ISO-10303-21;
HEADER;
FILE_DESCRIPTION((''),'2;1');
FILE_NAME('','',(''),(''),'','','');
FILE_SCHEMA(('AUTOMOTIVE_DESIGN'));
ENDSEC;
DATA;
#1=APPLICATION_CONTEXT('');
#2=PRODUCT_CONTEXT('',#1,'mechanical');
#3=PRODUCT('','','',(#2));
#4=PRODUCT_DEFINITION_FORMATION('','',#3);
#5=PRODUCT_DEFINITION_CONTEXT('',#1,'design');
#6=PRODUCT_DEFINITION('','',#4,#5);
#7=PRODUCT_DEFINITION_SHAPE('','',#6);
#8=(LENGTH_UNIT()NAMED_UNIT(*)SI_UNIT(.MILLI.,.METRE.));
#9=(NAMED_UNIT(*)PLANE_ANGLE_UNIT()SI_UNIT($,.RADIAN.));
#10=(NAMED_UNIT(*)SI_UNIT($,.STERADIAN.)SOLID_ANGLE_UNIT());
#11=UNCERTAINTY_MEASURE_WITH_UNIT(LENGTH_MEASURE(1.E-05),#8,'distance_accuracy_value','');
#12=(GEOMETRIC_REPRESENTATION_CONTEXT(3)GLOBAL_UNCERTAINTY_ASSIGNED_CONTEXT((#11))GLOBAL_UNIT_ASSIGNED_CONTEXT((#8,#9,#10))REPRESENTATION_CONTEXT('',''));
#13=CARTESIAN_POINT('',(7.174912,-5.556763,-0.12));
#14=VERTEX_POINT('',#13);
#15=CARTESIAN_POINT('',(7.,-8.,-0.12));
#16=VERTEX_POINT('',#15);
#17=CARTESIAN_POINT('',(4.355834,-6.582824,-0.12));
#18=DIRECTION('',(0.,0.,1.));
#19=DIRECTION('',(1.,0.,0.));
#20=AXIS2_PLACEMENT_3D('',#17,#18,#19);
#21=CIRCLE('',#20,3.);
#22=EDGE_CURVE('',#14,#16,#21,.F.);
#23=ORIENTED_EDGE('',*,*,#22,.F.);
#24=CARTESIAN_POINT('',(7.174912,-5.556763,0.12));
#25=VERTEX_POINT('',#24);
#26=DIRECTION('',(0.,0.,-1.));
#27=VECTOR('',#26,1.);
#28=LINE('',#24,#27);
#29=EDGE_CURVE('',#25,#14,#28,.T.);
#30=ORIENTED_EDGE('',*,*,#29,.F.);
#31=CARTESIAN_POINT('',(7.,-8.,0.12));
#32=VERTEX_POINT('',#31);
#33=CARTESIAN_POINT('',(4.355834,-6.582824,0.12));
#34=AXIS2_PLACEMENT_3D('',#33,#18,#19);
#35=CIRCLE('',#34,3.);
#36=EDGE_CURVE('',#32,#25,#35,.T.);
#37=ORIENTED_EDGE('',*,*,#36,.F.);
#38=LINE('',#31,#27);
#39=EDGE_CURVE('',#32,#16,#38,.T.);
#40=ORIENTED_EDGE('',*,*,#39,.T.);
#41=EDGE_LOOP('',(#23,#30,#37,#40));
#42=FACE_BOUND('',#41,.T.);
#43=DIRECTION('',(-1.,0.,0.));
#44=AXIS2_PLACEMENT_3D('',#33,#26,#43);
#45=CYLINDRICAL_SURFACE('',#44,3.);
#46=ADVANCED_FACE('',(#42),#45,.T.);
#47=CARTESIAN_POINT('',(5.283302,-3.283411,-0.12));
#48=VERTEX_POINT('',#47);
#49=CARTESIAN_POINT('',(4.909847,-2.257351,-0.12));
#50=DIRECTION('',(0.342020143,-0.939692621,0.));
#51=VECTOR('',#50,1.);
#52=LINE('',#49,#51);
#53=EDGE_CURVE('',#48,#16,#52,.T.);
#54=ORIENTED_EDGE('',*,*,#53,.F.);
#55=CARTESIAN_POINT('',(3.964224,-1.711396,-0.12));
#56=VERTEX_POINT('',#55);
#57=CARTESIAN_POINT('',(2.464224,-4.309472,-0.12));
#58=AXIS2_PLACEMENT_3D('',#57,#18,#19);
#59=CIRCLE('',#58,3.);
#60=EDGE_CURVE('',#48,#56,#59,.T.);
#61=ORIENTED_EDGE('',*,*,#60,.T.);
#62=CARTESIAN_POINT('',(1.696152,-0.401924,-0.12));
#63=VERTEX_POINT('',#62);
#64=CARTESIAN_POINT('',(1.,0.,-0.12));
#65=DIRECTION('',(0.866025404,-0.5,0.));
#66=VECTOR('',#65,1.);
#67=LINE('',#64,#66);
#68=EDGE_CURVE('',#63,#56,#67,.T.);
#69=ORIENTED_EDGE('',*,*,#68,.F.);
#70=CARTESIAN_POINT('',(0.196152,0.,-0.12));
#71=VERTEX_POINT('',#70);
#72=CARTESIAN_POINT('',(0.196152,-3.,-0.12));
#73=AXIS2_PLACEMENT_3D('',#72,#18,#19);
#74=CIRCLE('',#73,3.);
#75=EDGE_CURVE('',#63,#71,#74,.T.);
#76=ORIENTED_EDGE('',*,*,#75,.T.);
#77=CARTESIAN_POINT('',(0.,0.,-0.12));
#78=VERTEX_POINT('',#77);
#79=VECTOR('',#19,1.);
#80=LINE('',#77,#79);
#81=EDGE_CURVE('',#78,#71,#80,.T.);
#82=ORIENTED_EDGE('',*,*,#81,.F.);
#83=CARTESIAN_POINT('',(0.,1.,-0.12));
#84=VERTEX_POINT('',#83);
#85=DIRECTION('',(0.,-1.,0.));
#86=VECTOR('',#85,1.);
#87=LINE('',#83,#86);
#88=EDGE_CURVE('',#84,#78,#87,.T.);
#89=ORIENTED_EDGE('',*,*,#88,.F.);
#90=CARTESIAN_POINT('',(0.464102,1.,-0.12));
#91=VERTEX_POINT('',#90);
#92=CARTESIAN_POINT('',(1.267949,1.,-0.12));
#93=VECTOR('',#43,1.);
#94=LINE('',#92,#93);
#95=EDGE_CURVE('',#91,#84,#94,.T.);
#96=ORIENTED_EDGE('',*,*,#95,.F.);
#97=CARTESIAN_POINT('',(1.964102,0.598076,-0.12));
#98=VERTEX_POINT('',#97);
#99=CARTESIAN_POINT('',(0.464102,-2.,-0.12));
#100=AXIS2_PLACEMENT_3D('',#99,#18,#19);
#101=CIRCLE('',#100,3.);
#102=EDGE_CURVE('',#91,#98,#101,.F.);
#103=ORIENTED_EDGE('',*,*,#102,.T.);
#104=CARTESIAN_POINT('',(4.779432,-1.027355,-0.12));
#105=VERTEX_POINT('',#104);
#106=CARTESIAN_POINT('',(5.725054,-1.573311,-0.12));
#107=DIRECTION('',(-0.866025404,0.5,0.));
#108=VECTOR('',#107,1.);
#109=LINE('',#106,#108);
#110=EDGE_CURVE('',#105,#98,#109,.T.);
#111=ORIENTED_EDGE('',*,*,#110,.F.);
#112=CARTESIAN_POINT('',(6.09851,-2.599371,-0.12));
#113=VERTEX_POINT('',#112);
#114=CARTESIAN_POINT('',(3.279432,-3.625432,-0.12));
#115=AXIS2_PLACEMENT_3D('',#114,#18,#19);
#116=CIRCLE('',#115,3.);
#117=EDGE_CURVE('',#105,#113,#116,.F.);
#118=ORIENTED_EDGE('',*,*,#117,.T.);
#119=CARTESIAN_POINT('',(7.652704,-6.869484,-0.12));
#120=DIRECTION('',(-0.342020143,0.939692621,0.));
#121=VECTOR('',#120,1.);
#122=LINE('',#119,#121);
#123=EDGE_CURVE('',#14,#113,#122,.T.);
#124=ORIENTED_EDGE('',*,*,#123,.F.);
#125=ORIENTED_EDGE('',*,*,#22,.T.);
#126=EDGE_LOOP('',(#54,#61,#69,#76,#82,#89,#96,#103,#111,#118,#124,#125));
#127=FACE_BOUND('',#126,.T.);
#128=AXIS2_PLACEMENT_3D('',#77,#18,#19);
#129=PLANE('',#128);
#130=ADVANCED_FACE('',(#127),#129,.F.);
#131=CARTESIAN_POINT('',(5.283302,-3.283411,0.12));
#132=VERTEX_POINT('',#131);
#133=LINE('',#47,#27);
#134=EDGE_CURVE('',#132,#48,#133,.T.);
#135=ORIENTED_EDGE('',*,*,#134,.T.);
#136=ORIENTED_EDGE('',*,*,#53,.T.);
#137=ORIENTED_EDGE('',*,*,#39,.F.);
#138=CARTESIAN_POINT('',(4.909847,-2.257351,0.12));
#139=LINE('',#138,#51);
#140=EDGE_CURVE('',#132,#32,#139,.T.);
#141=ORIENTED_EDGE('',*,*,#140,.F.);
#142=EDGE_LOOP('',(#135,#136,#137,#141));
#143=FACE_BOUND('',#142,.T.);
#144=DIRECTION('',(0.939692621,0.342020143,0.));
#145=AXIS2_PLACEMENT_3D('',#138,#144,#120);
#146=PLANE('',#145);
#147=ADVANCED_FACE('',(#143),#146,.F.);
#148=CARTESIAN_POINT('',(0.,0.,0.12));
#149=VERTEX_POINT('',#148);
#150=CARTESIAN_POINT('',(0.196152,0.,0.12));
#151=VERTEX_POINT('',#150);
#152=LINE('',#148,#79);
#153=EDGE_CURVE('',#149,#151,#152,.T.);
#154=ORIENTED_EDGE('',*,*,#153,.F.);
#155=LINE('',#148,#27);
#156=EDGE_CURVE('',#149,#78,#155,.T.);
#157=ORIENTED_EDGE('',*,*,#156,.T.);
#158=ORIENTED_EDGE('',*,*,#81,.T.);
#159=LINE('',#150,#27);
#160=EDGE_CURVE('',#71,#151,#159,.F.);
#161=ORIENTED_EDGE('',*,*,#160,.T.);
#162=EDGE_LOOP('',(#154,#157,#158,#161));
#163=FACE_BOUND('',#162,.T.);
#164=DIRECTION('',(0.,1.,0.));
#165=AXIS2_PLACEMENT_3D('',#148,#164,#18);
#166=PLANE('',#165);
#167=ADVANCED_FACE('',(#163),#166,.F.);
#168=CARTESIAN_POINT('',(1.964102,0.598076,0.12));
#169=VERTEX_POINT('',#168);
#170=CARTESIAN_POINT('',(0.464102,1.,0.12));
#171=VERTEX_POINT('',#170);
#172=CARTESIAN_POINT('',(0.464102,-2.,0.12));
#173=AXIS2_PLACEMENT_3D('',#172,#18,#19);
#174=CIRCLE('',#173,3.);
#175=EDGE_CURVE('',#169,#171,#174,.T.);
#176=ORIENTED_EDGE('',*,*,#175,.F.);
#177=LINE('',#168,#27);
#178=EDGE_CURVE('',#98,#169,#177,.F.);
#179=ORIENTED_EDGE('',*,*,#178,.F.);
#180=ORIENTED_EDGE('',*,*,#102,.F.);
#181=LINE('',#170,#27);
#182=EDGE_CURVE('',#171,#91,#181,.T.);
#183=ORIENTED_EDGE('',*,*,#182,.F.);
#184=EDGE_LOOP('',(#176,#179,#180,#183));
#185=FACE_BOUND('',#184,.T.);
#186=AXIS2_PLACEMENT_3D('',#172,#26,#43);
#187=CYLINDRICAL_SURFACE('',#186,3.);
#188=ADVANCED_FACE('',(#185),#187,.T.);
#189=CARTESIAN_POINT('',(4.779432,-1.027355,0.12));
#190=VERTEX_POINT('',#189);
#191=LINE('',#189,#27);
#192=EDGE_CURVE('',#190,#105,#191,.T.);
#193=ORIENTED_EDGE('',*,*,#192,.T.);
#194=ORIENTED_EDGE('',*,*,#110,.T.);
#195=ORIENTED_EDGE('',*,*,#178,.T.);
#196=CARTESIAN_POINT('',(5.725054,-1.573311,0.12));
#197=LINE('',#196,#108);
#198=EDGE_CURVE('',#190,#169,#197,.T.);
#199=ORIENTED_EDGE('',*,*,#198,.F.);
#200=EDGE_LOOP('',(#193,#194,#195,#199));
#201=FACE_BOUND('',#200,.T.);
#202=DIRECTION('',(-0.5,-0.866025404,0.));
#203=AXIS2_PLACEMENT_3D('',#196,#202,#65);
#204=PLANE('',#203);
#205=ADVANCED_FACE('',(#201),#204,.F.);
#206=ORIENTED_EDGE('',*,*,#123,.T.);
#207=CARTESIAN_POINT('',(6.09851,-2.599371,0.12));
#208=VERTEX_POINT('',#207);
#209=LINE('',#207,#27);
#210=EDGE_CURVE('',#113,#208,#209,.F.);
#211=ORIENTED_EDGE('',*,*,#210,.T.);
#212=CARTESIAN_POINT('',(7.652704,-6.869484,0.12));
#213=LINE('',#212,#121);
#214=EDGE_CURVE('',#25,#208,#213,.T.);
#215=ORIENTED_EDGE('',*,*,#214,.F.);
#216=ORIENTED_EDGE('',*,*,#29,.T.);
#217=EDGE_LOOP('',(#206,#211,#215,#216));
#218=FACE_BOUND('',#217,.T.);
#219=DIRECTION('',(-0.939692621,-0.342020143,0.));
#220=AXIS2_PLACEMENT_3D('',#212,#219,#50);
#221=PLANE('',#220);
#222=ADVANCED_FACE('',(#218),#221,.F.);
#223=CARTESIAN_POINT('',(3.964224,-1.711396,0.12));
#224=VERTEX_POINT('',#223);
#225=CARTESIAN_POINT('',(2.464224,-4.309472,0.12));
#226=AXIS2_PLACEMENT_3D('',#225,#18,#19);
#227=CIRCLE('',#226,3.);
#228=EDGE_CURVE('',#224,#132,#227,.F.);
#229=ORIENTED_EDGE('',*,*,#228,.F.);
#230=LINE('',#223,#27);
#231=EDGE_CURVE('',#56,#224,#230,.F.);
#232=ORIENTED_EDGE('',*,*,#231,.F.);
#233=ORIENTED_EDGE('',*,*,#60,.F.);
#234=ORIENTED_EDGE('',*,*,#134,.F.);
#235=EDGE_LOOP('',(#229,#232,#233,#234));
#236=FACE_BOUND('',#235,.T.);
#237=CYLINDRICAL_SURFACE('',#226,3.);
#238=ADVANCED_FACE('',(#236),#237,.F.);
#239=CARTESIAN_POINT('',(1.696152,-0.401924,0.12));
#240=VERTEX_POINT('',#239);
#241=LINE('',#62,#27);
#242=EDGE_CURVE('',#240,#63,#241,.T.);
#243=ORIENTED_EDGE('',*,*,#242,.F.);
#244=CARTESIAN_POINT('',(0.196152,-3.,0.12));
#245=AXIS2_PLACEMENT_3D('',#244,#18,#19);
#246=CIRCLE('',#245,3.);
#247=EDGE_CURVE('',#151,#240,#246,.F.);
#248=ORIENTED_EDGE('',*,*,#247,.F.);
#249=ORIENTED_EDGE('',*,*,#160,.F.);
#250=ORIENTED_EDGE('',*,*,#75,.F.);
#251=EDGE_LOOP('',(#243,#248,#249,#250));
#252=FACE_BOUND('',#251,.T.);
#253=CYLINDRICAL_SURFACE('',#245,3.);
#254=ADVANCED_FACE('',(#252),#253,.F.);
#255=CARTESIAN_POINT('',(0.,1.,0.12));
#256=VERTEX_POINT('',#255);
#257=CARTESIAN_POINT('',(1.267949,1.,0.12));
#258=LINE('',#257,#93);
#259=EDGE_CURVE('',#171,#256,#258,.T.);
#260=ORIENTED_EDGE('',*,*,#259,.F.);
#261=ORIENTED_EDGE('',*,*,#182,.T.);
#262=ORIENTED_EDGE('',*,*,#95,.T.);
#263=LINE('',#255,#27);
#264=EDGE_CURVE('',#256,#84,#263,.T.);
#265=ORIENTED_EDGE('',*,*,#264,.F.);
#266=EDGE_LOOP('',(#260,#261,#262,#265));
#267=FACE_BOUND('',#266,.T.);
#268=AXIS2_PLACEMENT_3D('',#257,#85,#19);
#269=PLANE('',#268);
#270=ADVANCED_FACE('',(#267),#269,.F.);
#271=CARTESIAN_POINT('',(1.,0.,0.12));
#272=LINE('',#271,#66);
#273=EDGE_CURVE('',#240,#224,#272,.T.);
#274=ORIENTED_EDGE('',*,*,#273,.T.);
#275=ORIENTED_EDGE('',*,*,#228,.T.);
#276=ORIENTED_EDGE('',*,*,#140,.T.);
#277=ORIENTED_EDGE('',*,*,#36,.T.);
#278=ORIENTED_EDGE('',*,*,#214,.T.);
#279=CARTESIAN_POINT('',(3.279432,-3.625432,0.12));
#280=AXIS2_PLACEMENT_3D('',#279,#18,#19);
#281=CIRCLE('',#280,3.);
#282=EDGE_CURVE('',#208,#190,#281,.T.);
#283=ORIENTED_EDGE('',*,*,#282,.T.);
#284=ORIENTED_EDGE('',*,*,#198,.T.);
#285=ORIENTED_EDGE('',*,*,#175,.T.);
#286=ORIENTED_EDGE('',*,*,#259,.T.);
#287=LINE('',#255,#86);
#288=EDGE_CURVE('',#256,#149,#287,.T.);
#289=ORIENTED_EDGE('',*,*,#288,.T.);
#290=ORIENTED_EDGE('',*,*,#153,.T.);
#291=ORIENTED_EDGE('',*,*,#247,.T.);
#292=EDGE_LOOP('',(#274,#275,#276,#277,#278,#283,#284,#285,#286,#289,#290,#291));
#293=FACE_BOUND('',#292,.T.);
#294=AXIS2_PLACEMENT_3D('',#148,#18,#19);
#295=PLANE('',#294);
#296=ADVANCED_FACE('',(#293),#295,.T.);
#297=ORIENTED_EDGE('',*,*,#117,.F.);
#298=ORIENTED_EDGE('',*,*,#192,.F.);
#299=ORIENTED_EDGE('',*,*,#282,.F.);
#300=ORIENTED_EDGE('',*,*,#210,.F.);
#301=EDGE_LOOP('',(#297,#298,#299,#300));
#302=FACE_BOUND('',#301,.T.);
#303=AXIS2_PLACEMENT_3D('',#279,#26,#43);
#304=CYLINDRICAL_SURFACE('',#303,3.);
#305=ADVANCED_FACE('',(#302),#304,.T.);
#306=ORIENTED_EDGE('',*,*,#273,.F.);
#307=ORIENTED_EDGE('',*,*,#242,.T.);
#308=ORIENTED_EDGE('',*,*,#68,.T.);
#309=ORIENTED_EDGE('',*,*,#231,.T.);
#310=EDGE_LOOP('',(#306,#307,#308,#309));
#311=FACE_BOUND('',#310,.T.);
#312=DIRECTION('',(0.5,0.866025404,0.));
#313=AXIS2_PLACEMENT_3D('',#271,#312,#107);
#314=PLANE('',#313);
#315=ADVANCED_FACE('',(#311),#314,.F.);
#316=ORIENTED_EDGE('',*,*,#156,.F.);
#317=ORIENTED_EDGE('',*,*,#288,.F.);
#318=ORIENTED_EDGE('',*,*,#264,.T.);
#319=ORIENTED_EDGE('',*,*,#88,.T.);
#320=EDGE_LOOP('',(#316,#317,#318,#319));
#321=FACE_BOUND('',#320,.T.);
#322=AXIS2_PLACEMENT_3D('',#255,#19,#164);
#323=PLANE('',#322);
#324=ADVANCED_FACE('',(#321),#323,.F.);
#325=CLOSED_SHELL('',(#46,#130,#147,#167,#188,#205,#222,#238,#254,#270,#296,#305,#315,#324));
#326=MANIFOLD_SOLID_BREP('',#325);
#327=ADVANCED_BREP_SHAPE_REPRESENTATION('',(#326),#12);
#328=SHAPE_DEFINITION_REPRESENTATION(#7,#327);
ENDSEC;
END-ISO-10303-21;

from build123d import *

# Parameters (mm, degrees)
BOSS_EXTRUDE1_DEPTH = 0.12
FILLET1_R           = 3


with BuildPart() as part:
    # Sketch1 → Boss-Extrude1 (new, symmetric)
    with BuildSketch(Plane.XY):
        Polygon((0, 0), (1, 0), (4.909846718, -2.257351055), (7, -8), (7.652703645, -6.869484125), (5.725054187, -1.573310769), (1.267949192, 1), (0, 1), align=None)
    extrude(amount=BOSS_EXTRUDE1_DEPTH, both=True)

    # Fillet1
    # the kernel refuses this fillet: 3 mm, written as the material it adds along each edge
    with BuildSketch(Plane(origin=(1, 0, -0.12), x_dir=(-1, 0, 0), z_dir=(0, 0, 1))) as fillet1_piece_1:
        with BuildLine():
            CenterArc((FILLET1_R * 0.267949192431, FILLET1_R), FILLET1_R, 240, 30)
            Line((-FILLET1_R * 0.232050807569, FILLET1_R * 0.133974596216), (-FILLET1_R * 0.242050807569, FILLET1_R * 0.11665408814))
            Line((-FILLET1_R * 0.242050807569, FILLET1_R * 0.11665408814), (-FILLET1_R * 0.00535898384862, -FILLET1_R * 0.02))
            Line((-FILLET1_R * 0.00535898384862, -FILLET1_R * 0.02), (FILLET1_R * 0.267949192431, -FILLET1_R * 0.02))
            Line((FILLET1_R * 0.267949192431, -FILLET1_R * 0.02), (FILLET1_R * 0.267949192431, 0))
        make_face()
    extrude(amount=0.24)
    # the kernel refuses this fillet: 3 mm, written as the material it adds along each edge
    with BuildSketch(Plane(origin=(4.909846718, -2.257351055, -0.12), x_dir=(0.34202014332566544, -0.9396926207859095, 0), z_dir=(0, 0, 1))) as fillet1_2_piece_1:
        with BuildLine():
            CenterArc((FILLET1_R * 0.363970234266, -FILLET1_R), FILLET1_R, 90, 40)
            Line((-FILLET1_R * 0.27881737542, -FILLET1_R * 0.233955556881), (-FILLET1_R * 0.291673127614, -FILLET1_R * 0.218634668019))
            Line((-FILLET1_R * 0.291673127614, -FILLET1_R * 0.218634668019), (-FILLET1_R * 0.00727940468532, FILLET1_R * 0.02))
            Line((-FILLET1_R * 0.00727940468532, FILLET1_R * 0.02), (FILLET1_R * 0.363970234266, FILLET1_R * 0.02))
            Line((FILLET1_R * 0.363970234266, FILLET1_R * 0.02), (FILLET1_R * 0.363970234266, 0))
        make_face()
    extrude(amount=0.24)
    # the kernel refuses this fillet: 3 mm, written as the material it takes off along each edge
    with BuildSketch(Plane(origin=(1.267949192, 1, 2.129618943), x_dir=(-1, 0, 0), z_dir=(0, 0, -1))) as fillet1_3_piece_1:
        with BuildLine():
            CenterArc((FILLET1_R * 0.267949192431, -FILLET1_R), FILLET1_R, 90, 30)
            Line((-FILLET1_R * 0.232050807569, -FILLET1_R * 0.133974596216), (-FILLET1_R * 0.242050807569, -FILLET1_R * 0.11665408814))
            Line((-FILLET1_R * 0.242050807569, -FILLET1_R * 0.11665408814), (-FILLET1_R * 0.00535898384862, FILLET1_R * 0.02))
            Line((-FILLET1_R * 0.00535898384862, FILLET1_R * 0.02), (FILLET1_R * 0.267949192431, FILLET1_R * 0.02))
            Line((FILLET1_R * 0.267949192431, FILLET1_R * 0.02), (FILLET1_R * 0.267949192431, 0))
        make_face()
    extrude(amount=4.259237886, mode=Mode.SUBTRACT)
    # the kernel refuses this fillet: 3 mm, written as the material it takes off along each edge
    with BuildSketch(Plane(origin=(5.725054187, -1.573310769, -2.849776757), x_dir=(-0.8660254037844383, 0.5000000000000006, 0), z_dir=(0, 0, 1))) as fillet1_4_piece_1:
        with BuildLine():
            CenterArc((FILLET1_R * 0.363970234266, FILLET1_R), FILLET1_R, 230, 40)
            Line((-FILLET1_R * 0.27881737542, FILLET1_R * 0.233955556881), (-FILLET1_R * 0.291673127614, FILLET1_R * 0.218634668019))
            Line((-FILLET1_R * 0.291673127614, FILLET1_R * 0.218634668019), (-FILLET1_R * 0.00727940468532, -FILLET1_R * 0.02))
            Line((-FILLET1_R * 0.00727940468532, -FILLET1_R * 0.02), (FILLET1_R * 0.363970234266, -FILLET1_R * 0.02))
            Line((FILLET1_R * 0.363970234266, -FILLET1_R * 0.02), (FILLET1_R * 0.363970234266, 0))
        make_face()
    extrude(amount=5.699553514, mode=Mode.SUBTRACT)
    # the kernel refuses this fillet: 3 mm, written as the material it takes off along each edge
    with BuildSketch(Plane(origin=(7.652703645, -6.869484125, -3.612420866), x_dir=(-0.34202014332566655, 0.9396926207859092, 0), z_dir=(0, 0, 1))) as fillet1_5_piece_1:
        with BuildLine():
            CenterArc((1.396968346, 3), FILLET1_R, 221.810314896, 48.189685104)
            Line((-0.839099631, 1), (-0.883820991, 0.96))
            ThreePointArc((-0.883820991, 0.96), (-0.465512482, 0.461432743), (-0.045962667, -0.038567257))
            Line((-0.045962667, -0.038567257), (0, -0.06))
            Line((0, -0.06), (1.396968346, -0.06))
            Line((1.396968346, -0.06), (1.396968346, 0))
        make_face()
    extrude(amount=7.224841732, mode=Mode.SUBTRACT)


solid = part.part
